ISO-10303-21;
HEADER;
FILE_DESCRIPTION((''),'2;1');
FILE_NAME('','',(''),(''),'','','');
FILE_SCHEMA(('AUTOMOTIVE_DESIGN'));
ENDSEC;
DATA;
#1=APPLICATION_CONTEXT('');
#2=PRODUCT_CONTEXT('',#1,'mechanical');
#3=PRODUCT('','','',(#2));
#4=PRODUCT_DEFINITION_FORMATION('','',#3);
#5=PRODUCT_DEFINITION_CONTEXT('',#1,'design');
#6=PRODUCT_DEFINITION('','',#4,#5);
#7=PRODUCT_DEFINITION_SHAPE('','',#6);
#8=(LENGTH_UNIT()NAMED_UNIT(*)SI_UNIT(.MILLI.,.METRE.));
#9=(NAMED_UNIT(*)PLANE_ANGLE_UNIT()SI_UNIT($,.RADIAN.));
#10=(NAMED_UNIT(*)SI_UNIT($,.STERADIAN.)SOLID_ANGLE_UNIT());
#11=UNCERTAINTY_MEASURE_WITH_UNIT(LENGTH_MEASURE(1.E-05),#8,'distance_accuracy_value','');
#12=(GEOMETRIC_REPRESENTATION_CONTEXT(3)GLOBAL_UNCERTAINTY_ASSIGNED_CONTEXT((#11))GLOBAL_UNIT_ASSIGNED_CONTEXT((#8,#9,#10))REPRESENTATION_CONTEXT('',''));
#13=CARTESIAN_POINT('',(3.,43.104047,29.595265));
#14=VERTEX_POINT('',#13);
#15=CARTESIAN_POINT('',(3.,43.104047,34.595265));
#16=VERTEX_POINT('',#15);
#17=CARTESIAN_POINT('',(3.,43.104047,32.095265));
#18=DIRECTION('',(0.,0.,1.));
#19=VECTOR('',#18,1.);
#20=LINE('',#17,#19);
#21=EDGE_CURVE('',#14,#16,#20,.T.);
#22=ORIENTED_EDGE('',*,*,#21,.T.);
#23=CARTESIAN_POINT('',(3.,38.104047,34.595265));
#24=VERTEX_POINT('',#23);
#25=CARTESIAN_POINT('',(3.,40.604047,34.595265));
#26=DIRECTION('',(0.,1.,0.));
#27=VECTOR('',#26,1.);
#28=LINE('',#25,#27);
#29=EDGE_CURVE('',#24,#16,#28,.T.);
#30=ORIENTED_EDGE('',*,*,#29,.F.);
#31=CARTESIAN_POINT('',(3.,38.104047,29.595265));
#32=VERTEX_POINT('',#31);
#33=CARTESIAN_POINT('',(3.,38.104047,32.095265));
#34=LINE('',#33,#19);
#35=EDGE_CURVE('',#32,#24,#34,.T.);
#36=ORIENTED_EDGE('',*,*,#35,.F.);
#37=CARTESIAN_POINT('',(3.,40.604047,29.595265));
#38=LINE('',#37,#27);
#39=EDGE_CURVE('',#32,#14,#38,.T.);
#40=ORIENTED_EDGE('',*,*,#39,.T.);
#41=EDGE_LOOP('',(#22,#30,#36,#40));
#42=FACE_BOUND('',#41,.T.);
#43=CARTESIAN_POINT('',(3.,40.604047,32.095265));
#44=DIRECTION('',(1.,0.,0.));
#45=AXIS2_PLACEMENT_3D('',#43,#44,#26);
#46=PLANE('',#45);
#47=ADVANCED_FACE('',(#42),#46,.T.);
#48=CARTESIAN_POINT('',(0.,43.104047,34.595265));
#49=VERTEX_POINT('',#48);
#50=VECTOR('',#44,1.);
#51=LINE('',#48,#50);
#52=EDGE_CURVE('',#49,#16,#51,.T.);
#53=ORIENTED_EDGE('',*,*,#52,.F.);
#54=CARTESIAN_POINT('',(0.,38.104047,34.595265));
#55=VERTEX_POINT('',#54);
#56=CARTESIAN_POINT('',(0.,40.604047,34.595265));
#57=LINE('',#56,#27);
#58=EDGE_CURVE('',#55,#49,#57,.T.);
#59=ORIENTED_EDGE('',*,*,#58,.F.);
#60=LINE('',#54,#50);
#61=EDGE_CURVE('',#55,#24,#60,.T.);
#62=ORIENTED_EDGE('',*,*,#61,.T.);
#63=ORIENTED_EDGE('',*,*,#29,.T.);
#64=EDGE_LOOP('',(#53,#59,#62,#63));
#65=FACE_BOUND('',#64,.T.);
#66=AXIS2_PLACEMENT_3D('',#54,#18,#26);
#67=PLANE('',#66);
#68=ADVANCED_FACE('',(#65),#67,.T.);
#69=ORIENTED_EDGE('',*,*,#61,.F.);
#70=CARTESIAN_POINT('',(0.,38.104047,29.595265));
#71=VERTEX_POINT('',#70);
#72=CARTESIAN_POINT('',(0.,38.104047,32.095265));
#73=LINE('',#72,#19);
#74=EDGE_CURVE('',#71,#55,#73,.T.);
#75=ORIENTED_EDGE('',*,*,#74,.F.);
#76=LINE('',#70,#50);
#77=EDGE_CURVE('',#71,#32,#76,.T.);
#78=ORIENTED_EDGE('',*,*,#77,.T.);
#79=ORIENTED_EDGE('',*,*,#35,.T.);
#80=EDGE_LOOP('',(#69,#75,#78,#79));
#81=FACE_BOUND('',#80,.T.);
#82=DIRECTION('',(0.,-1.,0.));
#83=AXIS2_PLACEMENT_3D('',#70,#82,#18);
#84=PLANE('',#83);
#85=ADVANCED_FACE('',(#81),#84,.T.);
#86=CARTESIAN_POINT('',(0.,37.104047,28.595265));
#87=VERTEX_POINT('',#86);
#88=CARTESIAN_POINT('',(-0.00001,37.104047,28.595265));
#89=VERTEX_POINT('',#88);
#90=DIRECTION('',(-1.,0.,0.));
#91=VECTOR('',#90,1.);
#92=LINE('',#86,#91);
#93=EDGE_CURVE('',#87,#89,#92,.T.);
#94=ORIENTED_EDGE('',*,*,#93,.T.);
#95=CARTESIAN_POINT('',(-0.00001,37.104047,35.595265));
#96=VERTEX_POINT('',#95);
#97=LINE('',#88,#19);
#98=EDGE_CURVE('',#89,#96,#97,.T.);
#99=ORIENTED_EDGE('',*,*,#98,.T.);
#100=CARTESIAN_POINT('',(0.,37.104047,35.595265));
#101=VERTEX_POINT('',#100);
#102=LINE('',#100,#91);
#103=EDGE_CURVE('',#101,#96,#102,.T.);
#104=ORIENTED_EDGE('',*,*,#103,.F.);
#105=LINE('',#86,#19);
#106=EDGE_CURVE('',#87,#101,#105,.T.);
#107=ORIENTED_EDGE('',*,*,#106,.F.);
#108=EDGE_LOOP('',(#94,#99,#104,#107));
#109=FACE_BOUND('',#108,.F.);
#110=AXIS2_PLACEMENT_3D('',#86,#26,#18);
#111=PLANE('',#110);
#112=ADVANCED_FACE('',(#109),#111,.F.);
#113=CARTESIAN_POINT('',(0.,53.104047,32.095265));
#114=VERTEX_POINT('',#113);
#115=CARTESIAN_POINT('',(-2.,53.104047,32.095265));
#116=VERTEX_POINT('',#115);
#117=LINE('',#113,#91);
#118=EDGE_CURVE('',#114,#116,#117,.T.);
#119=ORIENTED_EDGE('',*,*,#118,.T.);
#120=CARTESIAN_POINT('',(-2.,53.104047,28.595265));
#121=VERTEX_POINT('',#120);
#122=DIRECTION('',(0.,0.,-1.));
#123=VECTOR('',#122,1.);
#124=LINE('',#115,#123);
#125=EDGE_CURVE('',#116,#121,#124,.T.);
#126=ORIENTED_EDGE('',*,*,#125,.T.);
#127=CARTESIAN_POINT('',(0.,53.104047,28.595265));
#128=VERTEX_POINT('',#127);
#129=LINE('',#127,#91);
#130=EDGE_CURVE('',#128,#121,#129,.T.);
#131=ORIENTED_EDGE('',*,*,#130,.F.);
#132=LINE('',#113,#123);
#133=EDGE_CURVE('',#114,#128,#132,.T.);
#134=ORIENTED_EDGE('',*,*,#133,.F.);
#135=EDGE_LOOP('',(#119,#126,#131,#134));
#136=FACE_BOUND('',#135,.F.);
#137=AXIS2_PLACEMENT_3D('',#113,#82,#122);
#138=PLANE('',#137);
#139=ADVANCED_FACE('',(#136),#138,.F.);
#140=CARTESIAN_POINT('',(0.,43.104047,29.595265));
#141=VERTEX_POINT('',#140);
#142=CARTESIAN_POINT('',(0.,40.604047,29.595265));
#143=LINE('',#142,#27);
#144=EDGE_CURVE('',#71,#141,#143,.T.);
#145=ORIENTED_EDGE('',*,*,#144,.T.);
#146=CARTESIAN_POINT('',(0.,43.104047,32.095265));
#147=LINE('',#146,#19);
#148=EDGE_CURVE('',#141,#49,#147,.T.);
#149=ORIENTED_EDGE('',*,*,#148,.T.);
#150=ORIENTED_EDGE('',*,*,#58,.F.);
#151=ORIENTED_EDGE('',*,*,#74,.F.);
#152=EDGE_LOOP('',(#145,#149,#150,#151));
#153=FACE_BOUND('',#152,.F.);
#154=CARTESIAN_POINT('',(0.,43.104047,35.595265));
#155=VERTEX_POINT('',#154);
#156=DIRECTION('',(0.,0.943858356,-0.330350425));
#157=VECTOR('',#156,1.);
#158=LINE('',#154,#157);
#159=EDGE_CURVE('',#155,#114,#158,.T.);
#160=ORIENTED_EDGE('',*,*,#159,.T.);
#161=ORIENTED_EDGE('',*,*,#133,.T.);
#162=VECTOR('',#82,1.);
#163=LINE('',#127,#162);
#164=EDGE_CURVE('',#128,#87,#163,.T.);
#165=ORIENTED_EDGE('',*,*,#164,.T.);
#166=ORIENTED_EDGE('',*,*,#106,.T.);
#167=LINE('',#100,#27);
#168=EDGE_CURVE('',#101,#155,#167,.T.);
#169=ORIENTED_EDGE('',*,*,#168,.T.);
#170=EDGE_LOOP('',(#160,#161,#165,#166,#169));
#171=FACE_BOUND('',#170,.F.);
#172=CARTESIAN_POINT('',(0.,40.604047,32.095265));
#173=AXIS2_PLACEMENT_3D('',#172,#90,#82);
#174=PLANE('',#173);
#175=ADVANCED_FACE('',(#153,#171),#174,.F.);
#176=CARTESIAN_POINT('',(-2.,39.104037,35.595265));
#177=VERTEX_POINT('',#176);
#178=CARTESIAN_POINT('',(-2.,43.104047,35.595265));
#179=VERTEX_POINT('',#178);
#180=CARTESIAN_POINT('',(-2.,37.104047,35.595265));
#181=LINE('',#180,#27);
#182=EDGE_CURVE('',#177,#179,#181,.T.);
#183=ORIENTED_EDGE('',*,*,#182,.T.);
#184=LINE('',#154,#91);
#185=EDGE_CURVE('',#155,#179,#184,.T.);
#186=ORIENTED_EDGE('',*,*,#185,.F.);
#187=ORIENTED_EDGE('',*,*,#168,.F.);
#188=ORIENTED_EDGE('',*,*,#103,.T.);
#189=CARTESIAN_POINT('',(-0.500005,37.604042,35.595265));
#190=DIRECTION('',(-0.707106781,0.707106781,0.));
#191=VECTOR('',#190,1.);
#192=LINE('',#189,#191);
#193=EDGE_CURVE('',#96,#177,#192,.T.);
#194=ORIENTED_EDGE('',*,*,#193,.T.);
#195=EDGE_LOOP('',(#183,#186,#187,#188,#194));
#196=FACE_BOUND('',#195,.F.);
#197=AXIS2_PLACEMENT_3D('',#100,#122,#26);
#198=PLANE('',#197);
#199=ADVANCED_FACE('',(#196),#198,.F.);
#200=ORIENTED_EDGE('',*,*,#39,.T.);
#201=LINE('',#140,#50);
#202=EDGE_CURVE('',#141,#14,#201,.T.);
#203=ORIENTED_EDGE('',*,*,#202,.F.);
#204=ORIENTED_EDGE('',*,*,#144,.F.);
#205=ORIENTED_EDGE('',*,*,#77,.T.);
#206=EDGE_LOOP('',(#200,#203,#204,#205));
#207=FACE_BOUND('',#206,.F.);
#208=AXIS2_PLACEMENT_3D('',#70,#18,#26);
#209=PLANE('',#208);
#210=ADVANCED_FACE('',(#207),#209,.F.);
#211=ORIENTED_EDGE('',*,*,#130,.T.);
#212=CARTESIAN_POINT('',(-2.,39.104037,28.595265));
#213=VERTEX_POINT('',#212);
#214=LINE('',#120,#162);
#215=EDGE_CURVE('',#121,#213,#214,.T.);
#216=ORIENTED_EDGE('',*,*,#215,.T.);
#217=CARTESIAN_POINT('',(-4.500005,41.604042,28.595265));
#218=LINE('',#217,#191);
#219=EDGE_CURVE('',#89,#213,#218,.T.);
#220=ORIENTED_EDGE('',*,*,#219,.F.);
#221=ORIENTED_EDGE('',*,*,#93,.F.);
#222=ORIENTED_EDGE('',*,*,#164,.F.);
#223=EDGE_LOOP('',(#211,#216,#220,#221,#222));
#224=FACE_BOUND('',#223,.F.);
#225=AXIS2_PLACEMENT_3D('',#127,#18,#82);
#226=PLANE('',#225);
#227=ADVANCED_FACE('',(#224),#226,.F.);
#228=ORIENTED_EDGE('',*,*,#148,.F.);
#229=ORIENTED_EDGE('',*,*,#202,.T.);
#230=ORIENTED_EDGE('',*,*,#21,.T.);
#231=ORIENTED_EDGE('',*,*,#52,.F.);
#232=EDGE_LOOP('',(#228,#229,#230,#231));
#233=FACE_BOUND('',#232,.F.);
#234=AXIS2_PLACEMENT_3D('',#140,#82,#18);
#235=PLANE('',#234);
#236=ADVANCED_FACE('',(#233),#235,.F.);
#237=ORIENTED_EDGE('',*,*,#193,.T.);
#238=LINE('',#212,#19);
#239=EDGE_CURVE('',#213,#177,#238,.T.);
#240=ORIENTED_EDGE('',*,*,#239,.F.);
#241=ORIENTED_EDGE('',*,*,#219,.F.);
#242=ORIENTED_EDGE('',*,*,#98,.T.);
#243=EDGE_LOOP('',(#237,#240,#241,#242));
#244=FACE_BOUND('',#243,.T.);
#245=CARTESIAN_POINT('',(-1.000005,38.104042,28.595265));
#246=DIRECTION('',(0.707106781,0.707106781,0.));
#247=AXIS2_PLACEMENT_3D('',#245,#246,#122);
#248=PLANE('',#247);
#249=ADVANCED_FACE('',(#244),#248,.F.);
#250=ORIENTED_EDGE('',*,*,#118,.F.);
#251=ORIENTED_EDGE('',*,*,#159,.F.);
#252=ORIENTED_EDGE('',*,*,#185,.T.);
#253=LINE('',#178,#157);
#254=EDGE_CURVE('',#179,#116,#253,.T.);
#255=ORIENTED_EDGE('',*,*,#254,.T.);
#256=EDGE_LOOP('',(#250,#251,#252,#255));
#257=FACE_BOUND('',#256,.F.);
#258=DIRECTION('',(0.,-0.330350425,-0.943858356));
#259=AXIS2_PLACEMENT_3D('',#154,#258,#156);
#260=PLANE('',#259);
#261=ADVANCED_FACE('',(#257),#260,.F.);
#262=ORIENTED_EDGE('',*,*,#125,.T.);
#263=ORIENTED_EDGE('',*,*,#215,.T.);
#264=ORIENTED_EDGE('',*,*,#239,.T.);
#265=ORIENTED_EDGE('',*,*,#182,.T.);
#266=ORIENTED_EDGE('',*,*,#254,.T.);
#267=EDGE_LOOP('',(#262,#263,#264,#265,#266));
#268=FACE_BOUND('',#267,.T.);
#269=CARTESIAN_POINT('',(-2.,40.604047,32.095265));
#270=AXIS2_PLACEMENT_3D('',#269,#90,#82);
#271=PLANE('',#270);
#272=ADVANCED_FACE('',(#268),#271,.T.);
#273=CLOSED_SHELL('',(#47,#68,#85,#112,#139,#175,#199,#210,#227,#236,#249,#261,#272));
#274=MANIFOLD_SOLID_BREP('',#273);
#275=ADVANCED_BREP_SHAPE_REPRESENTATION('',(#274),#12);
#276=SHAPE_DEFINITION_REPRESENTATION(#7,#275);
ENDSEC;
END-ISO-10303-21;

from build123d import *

# Parameters (mm, degrees)
F0_W     = 5
F0_H     = 5
F1_DEPTH = 3
F2_W     = 5
F2_H     = 5
F3_DEPTH = 2
F4_SIZE  = 1.99999


# Not quite as in the source:
# - a fillet or chamfer is up to 0.001 mm smaller than in the source, because OpenCascade refuses the exact size


with BuildPart() as f1:
    # F0 (on Right) → F1 (new body)
    with BuildSketch(Plane.YZ):
        with Locations((40.6040474772, 32.0952650385)):
            Rectangle(F0_W, F0_H)
    extrude(amount=F1_DEPTH)

    # F2 (on face) → F3 (join)
    with BuildSketch(Plane(origin=(0, 0, 0), x_dir=(0, -1, 0), z_dir=(-1, 0, 0))):
        with Locations((-40.6040474772, 32.0952650385)):
            Rectangle(F2_W, F2_H)
        Polygon((-37.1040474772, 28.5952650385), (-37.1040474772, 35.5952650385), (-43.1040474772, 35.5952650385), (-43.1040474772, 34.5952650385), (-38.1040474772, 34.5952650385), (-38.1040474772, 29.5952650385), (-43.1040474772, 29.5952650385), (-43.1040474772, 28.5952650385), align=None)
        Polygon((-43.1040474772, 34.5952650385), (-43.1040474772, 35.5952650385), (-51.1040474772, 32.7952650385), (-51.1040474772, 31.3952650385), (-43.1040474772, 28.5952650385), (-43.1040474772, 29.5952650385), align=None)
        Polygon((-51.1040474772, 31.3952650385), (-51.1040474772, 32.7952650385), (-53.1040474772, 32.0952650385), align=None)
        Polygon((-51.1040474772, 31.3952650385), (-53.1040474772, 32.0952650385), (-53.1040474772, 28.5952650385), (-51.1040474772, 28.5952650385), align=None)
        Polygon((-51.1040474772, 28.5952650385), (-43.1040474772, 28.5952650385), (-51.1040474772, 31.3952650385), align=None)
    extrude(amount=F3_DEPTH)

    # F4 (size 2 in the source; OpenCascade refuses exactly that, so slightly less here)
    f4_edges = [f1.edges().sort_by_distance(p)[0] for p in [
        (-2, 37.104047, 32.095265),
    ]]
    chamfer(f4_edges, length=F4_SIZE)


solid = f1.part
